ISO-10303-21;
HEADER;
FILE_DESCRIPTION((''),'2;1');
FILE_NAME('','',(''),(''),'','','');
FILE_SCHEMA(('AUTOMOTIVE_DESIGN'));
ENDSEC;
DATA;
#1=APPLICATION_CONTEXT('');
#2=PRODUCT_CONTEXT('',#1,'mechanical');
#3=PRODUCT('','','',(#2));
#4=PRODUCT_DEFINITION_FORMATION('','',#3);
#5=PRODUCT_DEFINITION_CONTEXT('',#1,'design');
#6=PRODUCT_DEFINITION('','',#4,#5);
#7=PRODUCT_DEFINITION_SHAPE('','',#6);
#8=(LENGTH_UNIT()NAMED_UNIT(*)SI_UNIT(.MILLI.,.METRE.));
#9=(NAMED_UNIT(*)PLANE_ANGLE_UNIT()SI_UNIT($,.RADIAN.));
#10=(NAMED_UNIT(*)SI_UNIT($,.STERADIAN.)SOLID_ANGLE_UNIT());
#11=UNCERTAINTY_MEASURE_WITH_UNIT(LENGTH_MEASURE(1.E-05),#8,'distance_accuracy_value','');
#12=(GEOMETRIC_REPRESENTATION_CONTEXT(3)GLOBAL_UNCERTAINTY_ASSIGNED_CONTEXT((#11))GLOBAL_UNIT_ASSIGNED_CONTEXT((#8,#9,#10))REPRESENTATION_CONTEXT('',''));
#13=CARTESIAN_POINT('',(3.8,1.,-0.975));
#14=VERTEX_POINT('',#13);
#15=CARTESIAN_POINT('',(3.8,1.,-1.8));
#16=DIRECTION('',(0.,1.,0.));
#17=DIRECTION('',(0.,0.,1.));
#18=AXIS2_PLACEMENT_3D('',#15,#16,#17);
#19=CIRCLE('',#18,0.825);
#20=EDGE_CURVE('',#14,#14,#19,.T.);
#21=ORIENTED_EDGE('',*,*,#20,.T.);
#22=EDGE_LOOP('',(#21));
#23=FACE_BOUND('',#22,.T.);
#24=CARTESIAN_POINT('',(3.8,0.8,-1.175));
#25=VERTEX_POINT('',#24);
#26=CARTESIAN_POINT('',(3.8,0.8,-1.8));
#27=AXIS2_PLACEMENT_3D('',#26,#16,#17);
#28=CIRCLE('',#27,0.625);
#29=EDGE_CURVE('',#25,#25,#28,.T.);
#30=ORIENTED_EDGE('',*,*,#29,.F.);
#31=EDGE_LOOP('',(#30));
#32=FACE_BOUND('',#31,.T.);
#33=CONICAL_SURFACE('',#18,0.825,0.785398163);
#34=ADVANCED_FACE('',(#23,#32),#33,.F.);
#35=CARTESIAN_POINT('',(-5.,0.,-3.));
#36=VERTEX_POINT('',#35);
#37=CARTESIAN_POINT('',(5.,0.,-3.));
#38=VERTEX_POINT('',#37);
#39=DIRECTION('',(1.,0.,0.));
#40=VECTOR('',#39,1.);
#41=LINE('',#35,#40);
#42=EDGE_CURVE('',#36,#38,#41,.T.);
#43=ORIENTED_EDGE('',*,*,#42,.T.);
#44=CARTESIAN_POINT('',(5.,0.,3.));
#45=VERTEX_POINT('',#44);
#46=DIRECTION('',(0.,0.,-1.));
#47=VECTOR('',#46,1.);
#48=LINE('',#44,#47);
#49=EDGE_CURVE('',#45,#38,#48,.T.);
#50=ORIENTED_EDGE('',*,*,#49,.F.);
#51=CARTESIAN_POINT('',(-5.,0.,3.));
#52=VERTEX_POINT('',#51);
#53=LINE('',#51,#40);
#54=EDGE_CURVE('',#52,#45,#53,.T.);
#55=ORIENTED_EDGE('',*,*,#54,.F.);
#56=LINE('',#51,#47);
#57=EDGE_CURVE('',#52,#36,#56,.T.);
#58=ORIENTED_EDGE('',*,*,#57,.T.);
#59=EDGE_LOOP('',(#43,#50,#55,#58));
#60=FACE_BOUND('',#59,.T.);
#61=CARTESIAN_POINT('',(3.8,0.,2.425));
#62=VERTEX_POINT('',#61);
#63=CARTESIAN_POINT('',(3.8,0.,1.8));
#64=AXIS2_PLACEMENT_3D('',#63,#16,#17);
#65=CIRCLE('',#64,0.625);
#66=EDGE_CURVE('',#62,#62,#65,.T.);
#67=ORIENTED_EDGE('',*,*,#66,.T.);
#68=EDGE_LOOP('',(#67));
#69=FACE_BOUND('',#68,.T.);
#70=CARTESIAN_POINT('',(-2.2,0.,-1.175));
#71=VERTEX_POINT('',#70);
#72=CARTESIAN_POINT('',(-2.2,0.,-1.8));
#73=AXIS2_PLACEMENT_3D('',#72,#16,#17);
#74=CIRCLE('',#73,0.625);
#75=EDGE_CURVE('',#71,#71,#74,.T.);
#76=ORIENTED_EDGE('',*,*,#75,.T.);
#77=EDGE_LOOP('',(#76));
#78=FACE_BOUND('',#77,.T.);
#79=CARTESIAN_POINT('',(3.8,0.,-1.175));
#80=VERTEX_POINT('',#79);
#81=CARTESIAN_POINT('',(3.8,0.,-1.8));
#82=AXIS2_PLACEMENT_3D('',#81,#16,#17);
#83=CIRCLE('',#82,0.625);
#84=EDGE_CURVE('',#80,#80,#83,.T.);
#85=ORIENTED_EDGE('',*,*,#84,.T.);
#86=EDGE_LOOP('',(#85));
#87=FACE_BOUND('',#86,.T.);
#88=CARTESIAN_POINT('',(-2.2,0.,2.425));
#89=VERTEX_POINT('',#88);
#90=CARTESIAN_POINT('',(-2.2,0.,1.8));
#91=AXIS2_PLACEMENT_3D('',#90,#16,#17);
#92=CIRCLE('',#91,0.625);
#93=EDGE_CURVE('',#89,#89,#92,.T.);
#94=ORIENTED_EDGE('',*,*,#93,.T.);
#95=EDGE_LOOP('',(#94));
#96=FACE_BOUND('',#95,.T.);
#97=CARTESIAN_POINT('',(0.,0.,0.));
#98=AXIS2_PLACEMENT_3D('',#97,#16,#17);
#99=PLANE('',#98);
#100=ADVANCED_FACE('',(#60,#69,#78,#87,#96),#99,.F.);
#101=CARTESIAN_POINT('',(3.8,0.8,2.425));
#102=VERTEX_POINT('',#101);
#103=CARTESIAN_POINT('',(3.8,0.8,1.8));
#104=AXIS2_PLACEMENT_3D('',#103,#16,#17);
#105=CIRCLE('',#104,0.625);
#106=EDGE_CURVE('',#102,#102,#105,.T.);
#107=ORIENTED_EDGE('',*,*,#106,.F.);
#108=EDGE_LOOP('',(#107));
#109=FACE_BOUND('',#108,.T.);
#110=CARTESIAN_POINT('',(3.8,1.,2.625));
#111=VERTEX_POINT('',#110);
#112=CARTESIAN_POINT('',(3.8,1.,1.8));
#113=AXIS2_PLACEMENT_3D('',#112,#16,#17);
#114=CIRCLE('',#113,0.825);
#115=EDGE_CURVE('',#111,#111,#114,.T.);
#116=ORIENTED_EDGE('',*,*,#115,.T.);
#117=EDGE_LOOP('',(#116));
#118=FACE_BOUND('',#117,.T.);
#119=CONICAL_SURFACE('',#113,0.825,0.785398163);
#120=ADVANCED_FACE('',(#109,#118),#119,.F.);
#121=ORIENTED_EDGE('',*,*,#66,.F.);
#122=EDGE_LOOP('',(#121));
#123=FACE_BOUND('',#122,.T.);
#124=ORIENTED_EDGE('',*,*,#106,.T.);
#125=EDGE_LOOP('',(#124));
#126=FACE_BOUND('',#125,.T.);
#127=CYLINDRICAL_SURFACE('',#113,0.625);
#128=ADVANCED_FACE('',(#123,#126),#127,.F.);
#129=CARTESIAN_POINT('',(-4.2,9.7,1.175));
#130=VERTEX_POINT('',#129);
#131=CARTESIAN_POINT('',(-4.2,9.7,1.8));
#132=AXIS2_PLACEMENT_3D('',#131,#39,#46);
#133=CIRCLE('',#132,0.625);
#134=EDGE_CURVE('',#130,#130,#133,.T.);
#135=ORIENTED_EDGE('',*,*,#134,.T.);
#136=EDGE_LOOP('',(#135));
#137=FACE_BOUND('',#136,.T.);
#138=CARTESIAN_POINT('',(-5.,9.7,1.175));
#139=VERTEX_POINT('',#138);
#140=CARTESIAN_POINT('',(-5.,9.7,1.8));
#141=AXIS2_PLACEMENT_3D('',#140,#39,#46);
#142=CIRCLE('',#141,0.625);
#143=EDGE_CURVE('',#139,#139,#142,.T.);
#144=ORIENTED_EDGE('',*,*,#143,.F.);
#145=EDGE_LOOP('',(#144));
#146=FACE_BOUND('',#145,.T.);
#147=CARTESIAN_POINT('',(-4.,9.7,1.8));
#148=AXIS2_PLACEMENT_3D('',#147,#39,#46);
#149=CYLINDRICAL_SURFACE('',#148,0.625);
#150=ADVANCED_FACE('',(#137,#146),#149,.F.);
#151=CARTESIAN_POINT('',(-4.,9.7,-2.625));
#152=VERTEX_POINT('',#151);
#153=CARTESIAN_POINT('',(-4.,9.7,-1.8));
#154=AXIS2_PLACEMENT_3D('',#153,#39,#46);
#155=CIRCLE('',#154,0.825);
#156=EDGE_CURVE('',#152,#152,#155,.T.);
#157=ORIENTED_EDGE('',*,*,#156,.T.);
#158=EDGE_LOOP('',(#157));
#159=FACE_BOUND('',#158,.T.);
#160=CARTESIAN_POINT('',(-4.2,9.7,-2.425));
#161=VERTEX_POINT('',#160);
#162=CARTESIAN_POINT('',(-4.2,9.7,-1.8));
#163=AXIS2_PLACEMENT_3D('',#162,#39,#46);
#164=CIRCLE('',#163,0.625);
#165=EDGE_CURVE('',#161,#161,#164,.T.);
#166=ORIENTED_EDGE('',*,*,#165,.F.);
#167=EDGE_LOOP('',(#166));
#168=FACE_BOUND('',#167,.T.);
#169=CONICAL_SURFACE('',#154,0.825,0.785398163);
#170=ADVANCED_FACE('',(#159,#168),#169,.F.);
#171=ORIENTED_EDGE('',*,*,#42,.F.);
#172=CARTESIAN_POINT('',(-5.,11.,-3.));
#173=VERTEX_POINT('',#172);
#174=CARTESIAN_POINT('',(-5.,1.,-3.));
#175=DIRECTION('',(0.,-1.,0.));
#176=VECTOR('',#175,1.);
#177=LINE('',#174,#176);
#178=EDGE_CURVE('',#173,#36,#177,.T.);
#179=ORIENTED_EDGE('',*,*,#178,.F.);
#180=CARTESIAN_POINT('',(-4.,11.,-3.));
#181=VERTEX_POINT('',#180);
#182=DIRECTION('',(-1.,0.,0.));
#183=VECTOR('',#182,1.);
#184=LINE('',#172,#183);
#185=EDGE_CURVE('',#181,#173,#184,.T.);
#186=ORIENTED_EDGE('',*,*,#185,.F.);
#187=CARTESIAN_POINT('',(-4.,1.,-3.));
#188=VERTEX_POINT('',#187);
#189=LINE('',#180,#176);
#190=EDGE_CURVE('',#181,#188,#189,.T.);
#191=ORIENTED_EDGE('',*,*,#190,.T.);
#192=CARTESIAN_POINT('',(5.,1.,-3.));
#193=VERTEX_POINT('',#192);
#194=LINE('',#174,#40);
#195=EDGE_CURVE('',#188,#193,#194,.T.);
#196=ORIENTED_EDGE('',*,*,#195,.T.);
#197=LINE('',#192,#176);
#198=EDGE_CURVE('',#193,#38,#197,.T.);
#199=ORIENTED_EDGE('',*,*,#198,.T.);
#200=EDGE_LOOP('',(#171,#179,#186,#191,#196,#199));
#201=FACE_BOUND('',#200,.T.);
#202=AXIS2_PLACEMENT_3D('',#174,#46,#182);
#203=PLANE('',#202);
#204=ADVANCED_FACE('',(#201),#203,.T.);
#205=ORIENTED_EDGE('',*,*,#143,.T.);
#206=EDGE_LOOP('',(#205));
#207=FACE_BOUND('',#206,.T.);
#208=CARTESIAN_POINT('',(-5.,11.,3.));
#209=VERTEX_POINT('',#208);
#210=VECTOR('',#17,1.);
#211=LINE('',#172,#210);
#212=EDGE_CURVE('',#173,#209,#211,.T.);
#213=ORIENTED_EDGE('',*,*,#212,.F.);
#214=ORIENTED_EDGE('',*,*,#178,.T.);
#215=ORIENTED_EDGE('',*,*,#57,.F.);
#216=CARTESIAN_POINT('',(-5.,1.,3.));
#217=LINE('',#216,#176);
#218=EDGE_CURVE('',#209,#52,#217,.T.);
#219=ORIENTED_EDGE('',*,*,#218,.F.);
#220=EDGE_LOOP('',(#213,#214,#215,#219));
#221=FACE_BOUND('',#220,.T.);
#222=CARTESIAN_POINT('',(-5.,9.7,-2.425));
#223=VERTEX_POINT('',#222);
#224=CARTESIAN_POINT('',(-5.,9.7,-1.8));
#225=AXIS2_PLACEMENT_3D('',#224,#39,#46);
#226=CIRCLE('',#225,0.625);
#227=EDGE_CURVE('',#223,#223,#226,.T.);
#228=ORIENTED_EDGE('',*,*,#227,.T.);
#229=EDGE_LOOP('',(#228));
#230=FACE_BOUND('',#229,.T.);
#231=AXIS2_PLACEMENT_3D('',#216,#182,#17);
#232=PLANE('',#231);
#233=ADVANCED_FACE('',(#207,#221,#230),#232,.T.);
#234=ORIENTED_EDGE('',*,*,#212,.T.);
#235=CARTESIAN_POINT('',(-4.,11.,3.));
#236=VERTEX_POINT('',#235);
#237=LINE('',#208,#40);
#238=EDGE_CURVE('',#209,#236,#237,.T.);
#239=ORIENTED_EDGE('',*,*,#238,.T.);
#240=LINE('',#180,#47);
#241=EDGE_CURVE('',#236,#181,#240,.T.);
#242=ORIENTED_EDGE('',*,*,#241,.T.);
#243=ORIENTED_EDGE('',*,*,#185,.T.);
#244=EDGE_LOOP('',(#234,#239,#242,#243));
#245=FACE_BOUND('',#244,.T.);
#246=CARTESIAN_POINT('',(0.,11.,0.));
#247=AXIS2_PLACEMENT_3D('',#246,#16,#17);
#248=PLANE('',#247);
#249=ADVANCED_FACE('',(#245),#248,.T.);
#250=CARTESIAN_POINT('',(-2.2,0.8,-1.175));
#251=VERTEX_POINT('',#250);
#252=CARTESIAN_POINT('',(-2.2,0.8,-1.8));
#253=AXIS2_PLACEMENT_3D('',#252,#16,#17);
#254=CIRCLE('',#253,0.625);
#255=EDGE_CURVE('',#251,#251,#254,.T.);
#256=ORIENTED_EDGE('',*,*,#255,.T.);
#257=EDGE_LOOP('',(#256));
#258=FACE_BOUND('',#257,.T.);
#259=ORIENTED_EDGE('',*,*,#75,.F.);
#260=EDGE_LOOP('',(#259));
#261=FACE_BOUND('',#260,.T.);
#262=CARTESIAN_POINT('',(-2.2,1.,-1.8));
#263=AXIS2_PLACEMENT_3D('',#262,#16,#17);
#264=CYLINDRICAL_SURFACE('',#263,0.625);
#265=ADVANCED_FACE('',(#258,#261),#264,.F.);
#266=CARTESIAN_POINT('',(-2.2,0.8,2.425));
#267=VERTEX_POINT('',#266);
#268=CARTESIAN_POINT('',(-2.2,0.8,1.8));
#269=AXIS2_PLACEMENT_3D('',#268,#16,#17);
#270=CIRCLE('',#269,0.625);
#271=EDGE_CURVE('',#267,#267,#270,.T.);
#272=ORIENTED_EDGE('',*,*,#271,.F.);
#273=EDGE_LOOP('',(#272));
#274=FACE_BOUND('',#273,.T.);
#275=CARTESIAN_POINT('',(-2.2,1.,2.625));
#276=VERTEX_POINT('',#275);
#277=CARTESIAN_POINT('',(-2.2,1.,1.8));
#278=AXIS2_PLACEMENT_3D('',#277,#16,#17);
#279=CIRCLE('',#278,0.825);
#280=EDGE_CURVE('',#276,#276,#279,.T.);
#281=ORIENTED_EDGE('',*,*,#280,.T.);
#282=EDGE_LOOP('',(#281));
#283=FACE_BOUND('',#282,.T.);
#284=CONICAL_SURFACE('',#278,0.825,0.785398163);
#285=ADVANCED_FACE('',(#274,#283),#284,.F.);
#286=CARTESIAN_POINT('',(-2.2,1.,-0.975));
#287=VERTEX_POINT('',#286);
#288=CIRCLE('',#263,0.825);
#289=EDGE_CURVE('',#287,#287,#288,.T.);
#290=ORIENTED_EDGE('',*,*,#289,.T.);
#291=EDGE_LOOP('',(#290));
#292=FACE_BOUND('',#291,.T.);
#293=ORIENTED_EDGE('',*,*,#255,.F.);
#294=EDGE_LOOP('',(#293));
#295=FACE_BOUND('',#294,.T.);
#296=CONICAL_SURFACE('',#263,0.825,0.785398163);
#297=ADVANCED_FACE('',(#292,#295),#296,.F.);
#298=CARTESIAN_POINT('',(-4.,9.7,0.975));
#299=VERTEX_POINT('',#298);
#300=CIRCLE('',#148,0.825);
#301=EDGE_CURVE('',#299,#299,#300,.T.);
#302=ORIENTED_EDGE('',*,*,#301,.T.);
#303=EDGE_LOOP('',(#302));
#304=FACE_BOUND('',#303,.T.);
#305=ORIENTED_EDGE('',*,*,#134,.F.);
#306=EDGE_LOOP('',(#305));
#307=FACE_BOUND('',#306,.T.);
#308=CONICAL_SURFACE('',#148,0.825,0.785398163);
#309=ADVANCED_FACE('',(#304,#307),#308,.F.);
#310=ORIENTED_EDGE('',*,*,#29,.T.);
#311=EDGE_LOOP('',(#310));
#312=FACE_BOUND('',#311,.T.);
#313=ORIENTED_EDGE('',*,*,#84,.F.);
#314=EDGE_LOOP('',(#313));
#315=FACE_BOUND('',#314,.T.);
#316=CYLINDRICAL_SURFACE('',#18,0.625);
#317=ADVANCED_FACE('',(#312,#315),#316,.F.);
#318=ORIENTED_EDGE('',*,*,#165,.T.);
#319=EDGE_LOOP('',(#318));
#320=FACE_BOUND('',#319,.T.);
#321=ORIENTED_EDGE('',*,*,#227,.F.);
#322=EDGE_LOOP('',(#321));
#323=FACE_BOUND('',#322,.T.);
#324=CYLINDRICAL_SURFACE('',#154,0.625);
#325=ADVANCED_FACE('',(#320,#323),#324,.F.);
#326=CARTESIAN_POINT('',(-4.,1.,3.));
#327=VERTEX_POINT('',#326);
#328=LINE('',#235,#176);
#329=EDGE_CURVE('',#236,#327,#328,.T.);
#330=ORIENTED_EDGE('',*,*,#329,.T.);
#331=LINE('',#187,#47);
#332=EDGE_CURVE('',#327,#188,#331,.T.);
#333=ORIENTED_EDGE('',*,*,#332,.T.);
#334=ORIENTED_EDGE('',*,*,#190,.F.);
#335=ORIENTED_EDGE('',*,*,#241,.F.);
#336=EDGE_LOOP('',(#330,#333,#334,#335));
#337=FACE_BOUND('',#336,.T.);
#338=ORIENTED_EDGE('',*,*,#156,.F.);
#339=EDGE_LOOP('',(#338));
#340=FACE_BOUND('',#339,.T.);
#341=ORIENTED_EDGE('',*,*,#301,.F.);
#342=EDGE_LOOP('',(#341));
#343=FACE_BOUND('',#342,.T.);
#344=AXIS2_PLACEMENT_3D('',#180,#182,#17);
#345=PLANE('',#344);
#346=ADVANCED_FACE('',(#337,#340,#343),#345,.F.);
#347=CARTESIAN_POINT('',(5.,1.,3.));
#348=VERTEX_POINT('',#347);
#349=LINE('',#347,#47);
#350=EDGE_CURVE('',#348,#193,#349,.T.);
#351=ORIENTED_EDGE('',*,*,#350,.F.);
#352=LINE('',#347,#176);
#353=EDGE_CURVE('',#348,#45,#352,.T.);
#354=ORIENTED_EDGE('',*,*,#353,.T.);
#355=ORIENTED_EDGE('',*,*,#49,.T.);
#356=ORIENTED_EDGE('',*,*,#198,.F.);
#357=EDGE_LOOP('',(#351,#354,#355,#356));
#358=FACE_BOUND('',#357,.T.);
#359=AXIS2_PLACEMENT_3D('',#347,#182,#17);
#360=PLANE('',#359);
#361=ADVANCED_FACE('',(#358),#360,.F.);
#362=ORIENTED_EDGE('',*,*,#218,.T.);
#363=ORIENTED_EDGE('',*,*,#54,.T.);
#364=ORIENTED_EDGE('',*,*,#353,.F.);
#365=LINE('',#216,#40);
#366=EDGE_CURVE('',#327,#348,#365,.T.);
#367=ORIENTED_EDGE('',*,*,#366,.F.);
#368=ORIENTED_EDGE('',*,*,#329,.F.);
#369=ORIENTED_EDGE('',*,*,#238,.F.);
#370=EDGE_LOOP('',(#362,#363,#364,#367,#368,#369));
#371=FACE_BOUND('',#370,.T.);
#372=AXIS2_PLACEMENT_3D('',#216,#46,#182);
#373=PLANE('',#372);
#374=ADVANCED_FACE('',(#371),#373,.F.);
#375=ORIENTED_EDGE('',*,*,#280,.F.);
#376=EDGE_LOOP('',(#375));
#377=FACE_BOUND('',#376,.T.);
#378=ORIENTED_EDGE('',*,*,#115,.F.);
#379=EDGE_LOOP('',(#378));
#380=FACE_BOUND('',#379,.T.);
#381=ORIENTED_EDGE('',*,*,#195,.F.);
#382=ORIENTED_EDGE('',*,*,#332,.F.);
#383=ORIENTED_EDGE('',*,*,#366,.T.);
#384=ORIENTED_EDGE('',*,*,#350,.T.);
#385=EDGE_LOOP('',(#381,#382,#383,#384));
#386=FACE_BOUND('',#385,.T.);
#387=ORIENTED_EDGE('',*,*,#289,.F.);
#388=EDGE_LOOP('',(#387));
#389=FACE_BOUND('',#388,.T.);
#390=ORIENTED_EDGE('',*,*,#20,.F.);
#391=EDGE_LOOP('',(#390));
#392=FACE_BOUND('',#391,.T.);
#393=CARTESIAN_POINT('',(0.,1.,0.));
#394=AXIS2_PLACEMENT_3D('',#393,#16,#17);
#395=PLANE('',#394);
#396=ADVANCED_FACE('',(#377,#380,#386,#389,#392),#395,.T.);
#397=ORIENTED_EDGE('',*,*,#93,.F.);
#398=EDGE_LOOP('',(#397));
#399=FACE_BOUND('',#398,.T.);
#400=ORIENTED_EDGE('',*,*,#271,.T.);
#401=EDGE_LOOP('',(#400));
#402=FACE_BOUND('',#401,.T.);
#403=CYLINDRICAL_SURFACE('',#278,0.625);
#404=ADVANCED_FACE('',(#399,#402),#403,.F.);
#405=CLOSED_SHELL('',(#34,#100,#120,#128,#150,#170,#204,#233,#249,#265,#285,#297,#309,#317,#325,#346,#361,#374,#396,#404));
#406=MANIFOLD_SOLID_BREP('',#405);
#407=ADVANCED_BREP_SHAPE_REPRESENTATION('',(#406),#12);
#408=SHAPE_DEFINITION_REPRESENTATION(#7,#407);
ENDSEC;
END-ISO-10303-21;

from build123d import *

# Parameters (mm, degrees)
SKETCH_1_W                     = 10
SKETCH_1_H                     = 6
EXTRUDE_1_DEPTH                = 1
SKETCH_2_W                     = 1
SKETCH_2_H                     = 6
EXTRUDE_2_DEPTH                = 10
HOLE_WIZARD_M1_6_2_D           = 1.25
HOLE_WIZARD_M1_6_2_CSINK_D     = 1.65
HOLE_WIZARD_M1_6_2_CSINK_ANGLE = 90
HOLE_WIZARD_M1_6_4_D           = 1.25
HOLE_WIZARD_M1_6_4_CSINK_D     = 1.65
HOLE_WIZARD_M1_6_4_CSINK_ANGLE = 90


# Read off the part's stored shape, not the designer's step: M1.6 螺纹孔3
with BuildPart() as part:
    # 草图1 → 凸台-拉伸1 (new body)
    with BuildSketch(Plane(origin=(0, 0, 0), x_dir=(1, 0, 0), z_dir=(0, 1, 0))):
        Rectangle(SKETCH_1_W, SKETCH_1_H)
    extrude(amount=EXTRUDE_1_DEPTH)

    # 草图2 → 凸台-拉伸2 (add)
    with BuildSketch(Plane(origin=(0, 1, 0), x_dir=(1, 0, 0), z_dir=(0, 1, 0))):
        with Locations((-4.5, 0)):
            Rectangle(SKETCH_2_W, SKETCH_2_H)
    extrude(amount=EXTRUDE_2_DEPTH)

    # M1.6 螺纹孔2 (through all)
    with Locations(Plane(origin=(-4, 0, 0), x_dir=(0, 0, -1), z_dir=(1, 0, 0))):
        with Locations((-1.8, 9.7), (1.8, 9.7)):
            CounterSinkHole(HOLE_WIZARD_M1_6_2_D / 2, HOLE_WIZARD_M1_6_2_CSINK_D / 2, counter_sink_angle=HOLE_WIZARD_M1_6_2_CSINK_ANGLE)

    # M1.6 螺纹孔3 outline → M1.6 螺纹孔3 (revolve, cut)
    with BuildSketch(Plane(origin=(3.8, 0, 1.8), x_dir=(1, 0, 0), z_dir=(0, 0, 1))):
        Polygon((0, 0), (0.625, 0), (0.625, 0.8), (0.825, 1), (0, 1), align=None)
    revolve(axis=Axis((3.8, 0, 1.8), (0, 1, 0)), mode=Mode.SUBTRACT)

    # Hole Wizard M1.6 _3 2 outline → Hole Wizard M1.6 _3 2 (revolve, cut)
    with BuildSketch(Plane(origin=(3.8, 0, -1.8), x_dir=(1, 0, 0), z_dir=(0, 0, 1))):
        Polygon((0, 0), (0.625, 0), (0.625, 0.8), (0.825, 1), (0, 1), align=None)
    revolve(axis=Axis((3.8, 0, -1.8), (0, 1, 0)), mode=Mode.SUBTRACT)

    # M1.6 螺纹孔4 (through all)
    with Locations(Plane(origin=(0, 1, 0), x_dir=(1, 0, 0), z_dir=(0, 1, 0))):
        with Locations((-2.2, -1.8), (-2.2, 1.8)):
            CounterSinkHole(HOLE_WIZARD_M1_6_4_D / 2, HOLE_WIZARD_M1_6_4_CSINK_D / 2, counter_sink_angle=HOLE_WIZARD_M1_6_4_CSINK_ANGLE)


solid = part.part
